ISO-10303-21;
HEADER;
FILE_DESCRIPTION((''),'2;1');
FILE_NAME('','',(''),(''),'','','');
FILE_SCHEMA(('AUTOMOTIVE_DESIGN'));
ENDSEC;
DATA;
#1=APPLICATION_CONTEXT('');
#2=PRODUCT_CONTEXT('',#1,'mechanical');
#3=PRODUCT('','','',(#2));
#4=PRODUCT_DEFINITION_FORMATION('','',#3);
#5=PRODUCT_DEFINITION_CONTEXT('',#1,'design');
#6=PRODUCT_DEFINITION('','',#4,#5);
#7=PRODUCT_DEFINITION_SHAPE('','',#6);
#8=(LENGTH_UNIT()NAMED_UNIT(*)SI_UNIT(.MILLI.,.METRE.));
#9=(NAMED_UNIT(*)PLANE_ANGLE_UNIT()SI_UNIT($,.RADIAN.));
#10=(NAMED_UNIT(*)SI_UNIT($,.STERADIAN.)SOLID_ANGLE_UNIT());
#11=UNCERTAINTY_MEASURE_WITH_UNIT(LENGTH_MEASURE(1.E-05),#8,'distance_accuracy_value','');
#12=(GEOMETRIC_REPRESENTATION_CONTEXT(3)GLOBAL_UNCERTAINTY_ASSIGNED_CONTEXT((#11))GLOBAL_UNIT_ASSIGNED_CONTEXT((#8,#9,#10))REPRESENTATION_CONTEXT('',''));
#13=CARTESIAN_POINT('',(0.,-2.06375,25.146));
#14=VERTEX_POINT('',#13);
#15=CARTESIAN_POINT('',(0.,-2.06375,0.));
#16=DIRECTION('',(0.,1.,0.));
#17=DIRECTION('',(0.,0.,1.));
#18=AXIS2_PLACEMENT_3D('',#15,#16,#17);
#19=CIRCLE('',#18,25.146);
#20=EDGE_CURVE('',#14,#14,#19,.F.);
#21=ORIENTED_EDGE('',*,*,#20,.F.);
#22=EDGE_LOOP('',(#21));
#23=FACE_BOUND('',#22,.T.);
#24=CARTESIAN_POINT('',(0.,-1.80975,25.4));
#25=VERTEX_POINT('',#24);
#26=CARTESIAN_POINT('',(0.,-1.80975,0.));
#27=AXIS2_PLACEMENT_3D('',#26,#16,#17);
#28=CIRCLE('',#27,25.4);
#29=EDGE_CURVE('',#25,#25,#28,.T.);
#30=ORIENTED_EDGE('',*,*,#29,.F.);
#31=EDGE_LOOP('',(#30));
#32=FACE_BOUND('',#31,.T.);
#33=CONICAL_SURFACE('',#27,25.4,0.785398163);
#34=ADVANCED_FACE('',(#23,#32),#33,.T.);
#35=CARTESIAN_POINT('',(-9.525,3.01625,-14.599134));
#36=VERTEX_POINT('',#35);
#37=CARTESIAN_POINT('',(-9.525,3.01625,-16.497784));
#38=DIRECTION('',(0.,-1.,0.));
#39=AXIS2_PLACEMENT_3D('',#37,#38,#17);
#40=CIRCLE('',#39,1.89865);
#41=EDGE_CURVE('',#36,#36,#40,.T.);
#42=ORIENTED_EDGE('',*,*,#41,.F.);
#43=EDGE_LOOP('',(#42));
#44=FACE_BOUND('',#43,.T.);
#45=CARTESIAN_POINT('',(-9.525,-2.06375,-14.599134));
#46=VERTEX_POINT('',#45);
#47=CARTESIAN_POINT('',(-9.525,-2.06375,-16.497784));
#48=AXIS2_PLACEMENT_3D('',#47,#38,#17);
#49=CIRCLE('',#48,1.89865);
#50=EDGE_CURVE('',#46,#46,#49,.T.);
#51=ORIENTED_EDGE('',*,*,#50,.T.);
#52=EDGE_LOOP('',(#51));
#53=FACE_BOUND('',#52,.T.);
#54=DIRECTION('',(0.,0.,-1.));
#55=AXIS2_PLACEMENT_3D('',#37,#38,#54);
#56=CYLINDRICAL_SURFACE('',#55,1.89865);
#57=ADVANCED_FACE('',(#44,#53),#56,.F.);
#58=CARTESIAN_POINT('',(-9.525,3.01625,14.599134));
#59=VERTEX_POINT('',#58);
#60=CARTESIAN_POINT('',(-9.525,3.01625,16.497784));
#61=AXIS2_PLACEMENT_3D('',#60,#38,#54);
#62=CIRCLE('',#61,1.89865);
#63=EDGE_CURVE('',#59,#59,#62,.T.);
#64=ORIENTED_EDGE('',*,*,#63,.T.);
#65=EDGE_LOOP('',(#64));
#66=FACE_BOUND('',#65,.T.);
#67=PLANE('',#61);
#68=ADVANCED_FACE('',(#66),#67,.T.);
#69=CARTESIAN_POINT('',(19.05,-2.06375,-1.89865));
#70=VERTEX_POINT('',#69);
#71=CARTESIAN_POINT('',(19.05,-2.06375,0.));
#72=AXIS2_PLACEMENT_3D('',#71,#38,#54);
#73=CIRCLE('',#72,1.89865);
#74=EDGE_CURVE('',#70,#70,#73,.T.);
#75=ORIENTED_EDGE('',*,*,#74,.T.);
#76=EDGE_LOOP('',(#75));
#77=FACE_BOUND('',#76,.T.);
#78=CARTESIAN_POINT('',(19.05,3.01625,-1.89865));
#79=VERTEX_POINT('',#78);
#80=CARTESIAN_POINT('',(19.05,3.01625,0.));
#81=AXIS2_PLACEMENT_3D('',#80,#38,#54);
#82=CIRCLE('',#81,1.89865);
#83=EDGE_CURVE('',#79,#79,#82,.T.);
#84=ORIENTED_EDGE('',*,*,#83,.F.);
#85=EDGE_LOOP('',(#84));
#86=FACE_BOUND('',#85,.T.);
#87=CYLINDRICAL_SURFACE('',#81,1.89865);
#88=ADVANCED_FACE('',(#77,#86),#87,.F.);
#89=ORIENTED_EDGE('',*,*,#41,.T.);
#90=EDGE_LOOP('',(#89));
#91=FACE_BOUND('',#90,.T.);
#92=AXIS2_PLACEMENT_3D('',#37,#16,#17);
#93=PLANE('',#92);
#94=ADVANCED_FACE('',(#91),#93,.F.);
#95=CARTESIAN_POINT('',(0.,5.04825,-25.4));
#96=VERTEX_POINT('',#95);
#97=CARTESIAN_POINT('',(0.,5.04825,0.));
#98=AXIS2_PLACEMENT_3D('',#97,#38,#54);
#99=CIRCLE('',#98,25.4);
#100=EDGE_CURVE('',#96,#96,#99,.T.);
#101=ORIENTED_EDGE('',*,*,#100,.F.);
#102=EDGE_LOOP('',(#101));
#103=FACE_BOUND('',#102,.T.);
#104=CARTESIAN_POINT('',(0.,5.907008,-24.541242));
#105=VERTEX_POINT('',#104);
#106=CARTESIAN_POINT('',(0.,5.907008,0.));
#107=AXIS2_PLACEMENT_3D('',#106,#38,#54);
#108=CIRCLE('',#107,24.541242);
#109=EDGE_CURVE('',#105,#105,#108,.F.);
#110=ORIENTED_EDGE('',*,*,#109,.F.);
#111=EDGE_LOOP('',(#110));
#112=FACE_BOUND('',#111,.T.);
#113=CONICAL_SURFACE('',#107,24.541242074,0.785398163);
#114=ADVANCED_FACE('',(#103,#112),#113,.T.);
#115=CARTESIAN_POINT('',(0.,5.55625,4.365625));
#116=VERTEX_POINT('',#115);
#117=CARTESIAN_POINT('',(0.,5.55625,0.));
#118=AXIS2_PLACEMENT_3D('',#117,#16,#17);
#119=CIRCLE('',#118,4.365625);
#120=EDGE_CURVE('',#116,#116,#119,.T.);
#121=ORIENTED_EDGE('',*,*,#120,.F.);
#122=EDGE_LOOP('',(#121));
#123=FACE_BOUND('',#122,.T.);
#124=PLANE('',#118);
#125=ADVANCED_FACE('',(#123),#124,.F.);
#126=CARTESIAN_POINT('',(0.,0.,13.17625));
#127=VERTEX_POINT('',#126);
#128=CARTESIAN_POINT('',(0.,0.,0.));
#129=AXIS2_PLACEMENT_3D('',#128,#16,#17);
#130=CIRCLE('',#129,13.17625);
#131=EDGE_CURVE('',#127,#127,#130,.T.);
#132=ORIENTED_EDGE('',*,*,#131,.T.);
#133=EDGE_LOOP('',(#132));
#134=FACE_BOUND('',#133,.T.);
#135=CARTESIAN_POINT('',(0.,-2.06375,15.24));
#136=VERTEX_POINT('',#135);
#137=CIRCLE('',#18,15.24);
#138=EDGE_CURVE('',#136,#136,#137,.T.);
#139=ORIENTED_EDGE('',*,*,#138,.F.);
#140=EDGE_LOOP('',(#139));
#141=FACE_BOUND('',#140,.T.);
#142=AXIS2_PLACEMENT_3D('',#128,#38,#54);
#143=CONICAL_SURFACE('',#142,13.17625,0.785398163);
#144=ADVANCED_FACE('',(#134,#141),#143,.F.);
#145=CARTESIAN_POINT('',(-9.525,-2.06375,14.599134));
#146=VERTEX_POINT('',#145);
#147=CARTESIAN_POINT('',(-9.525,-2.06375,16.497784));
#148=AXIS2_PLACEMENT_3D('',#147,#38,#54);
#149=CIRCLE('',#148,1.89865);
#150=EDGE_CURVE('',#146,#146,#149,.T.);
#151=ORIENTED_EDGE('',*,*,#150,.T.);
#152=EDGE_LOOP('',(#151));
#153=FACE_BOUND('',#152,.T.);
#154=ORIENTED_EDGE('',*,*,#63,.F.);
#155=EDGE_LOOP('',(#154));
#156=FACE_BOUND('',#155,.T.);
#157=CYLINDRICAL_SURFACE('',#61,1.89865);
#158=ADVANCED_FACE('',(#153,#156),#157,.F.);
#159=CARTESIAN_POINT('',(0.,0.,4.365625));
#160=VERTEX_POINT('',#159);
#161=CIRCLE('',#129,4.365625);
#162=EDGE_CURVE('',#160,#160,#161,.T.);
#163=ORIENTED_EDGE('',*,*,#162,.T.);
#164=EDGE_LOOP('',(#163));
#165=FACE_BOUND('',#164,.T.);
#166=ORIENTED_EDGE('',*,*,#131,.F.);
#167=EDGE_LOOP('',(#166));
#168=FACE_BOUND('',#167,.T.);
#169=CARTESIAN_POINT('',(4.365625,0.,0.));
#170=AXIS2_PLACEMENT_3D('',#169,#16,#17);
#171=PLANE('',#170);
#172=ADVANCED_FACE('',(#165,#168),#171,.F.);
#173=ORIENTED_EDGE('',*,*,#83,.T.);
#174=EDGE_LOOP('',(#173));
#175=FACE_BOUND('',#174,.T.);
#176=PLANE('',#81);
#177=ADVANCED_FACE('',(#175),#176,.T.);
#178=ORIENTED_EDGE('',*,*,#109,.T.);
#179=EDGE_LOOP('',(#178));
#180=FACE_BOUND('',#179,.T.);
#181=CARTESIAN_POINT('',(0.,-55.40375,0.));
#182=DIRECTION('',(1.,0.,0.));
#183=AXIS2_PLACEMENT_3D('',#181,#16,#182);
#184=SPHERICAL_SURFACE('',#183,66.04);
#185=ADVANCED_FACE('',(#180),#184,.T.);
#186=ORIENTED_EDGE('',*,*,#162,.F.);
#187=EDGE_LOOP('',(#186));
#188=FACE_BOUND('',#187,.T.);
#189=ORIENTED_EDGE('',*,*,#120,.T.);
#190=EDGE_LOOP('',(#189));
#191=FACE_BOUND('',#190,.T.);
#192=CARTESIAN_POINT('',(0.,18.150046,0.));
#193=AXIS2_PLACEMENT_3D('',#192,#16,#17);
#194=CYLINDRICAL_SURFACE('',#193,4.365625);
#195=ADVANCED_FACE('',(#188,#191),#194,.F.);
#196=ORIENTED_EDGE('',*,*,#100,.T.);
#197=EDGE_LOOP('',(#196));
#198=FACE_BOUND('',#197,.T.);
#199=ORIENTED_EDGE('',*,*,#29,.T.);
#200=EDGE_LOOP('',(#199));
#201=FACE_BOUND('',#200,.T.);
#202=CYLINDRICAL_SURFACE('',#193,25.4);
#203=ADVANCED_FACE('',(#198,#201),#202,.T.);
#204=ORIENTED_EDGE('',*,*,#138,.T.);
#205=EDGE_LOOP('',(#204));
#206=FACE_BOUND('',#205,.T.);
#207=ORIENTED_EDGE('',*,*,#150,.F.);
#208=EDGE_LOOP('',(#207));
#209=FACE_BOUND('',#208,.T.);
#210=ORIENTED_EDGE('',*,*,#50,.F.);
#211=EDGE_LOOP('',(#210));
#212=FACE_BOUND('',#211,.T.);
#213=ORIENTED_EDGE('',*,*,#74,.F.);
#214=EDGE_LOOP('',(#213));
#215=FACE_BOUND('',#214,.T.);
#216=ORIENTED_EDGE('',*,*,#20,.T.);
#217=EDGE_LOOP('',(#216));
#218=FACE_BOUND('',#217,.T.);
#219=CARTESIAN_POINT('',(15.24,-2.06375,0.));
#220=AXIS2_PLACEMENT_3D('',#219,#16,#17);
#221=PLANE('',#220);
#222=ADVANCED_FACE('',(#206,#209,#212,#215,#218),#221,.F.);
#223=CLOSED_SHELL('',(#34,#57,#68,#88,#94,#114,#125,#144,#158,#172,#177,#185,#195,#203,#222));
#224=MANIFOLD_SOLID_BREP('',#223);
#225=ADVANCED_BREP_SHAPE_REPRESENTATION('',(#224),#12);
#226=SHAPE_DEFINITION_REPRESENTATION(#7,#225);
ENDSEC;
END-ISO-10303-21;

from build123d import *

# Parameters (mm, degrees)
CHAMFER2_SIZE      = 0.254
CHAMFER3_SIZE      = 0.508
SKETCH4_R          = 1.89865
CUT_EXTRUDE1_DEPTH = 5.08


with BuildPart() as part:
    # Sketch1 → Revolve1 (revolve)
    with BuildSketch(Plane.XY, mode=Mode.PRIVATE) as revolve1_sk:
        with BuildLine():
            Line((0, 5.55625), (4.365625, 5.55625))
            Line((4.365625, 5.55625), (4.365625, 0))
            Line((4.365625, 0), (13.17625, 0))
            Line((13.17625, 0), (15.24, -2.06375))
            Line((15.24, -2.06375), (25.4, -2.06375))
            Line((25.4, -2.06375), (25.4, 5.55625))
            ThreePointArc((25.4, 5.55625), (12.951509565, 9.353797823), (0, 10.63625))
            Line((0, 10.63625), (0, 5.55625))
        make_face()
    revolve(revolve1_sk.sketch.rotate(Axis((0, 18.150046132, 0), (0, -1, 0)), 90), axis=Axis((0, 18.150046132, 0), (0, -1, 0)))

    # Chamfer2
    chamfer2_edges = [part.edges().sort_by_distance(p)[0] for p in [
        (0, -2.06375, -25.4),
    ]]
    chamfer(chamfer2_edges, length=CHAMFER2_SIZE)

    # Chamfer3
    # the kernel refuses this chamfer: 0.943428571, 0.508 mm, written as the material it takes off along each edge
    with BuildSketch(Plane(origin=(0, 5.55625, 0), x_dir=(0, 0, 1), z_dir=(1, 0, 0))) as chamfer3_piece_1:
        with BuildLine():
            Line((25.4, CHAMFER3_SIZE), (24.541242074, -0.350757926))
            ThreePointArc((24.541242074, -0.350757926), (24.955132553, -0.183462114), (25.4, 0))
            Line((25.4, 0), (25.4, CHAMFER3_SIZE))
        make_face()
    revolve(axis=Axis((0, 5.55625, 0), (0, -1, 0)), mode=Mode.SUBTRACT)

    # Sketch4 → Cut-Extrude1 (cut)
    with BuildSketch(Plane.XZ.offset(2.06375)):
        with Locations(Location((19.05, 0, 0), (0, 0, 270))):
            Circle(SKETCH4_R)
        with Locations(Location((-9.525, 16.497783942, 0), (0, 0, 270))):
            Circle(SKETCH4_R)
        with Locations(Location((-9.525, -16.497783942, 0), (0, 0, 90))):
            Circle(SKETCH4_R)
    extrude(amount=-CUT_EXTRUDE1_DEPTH, mode=Mode.SUBTRACT)


solid = part.part
